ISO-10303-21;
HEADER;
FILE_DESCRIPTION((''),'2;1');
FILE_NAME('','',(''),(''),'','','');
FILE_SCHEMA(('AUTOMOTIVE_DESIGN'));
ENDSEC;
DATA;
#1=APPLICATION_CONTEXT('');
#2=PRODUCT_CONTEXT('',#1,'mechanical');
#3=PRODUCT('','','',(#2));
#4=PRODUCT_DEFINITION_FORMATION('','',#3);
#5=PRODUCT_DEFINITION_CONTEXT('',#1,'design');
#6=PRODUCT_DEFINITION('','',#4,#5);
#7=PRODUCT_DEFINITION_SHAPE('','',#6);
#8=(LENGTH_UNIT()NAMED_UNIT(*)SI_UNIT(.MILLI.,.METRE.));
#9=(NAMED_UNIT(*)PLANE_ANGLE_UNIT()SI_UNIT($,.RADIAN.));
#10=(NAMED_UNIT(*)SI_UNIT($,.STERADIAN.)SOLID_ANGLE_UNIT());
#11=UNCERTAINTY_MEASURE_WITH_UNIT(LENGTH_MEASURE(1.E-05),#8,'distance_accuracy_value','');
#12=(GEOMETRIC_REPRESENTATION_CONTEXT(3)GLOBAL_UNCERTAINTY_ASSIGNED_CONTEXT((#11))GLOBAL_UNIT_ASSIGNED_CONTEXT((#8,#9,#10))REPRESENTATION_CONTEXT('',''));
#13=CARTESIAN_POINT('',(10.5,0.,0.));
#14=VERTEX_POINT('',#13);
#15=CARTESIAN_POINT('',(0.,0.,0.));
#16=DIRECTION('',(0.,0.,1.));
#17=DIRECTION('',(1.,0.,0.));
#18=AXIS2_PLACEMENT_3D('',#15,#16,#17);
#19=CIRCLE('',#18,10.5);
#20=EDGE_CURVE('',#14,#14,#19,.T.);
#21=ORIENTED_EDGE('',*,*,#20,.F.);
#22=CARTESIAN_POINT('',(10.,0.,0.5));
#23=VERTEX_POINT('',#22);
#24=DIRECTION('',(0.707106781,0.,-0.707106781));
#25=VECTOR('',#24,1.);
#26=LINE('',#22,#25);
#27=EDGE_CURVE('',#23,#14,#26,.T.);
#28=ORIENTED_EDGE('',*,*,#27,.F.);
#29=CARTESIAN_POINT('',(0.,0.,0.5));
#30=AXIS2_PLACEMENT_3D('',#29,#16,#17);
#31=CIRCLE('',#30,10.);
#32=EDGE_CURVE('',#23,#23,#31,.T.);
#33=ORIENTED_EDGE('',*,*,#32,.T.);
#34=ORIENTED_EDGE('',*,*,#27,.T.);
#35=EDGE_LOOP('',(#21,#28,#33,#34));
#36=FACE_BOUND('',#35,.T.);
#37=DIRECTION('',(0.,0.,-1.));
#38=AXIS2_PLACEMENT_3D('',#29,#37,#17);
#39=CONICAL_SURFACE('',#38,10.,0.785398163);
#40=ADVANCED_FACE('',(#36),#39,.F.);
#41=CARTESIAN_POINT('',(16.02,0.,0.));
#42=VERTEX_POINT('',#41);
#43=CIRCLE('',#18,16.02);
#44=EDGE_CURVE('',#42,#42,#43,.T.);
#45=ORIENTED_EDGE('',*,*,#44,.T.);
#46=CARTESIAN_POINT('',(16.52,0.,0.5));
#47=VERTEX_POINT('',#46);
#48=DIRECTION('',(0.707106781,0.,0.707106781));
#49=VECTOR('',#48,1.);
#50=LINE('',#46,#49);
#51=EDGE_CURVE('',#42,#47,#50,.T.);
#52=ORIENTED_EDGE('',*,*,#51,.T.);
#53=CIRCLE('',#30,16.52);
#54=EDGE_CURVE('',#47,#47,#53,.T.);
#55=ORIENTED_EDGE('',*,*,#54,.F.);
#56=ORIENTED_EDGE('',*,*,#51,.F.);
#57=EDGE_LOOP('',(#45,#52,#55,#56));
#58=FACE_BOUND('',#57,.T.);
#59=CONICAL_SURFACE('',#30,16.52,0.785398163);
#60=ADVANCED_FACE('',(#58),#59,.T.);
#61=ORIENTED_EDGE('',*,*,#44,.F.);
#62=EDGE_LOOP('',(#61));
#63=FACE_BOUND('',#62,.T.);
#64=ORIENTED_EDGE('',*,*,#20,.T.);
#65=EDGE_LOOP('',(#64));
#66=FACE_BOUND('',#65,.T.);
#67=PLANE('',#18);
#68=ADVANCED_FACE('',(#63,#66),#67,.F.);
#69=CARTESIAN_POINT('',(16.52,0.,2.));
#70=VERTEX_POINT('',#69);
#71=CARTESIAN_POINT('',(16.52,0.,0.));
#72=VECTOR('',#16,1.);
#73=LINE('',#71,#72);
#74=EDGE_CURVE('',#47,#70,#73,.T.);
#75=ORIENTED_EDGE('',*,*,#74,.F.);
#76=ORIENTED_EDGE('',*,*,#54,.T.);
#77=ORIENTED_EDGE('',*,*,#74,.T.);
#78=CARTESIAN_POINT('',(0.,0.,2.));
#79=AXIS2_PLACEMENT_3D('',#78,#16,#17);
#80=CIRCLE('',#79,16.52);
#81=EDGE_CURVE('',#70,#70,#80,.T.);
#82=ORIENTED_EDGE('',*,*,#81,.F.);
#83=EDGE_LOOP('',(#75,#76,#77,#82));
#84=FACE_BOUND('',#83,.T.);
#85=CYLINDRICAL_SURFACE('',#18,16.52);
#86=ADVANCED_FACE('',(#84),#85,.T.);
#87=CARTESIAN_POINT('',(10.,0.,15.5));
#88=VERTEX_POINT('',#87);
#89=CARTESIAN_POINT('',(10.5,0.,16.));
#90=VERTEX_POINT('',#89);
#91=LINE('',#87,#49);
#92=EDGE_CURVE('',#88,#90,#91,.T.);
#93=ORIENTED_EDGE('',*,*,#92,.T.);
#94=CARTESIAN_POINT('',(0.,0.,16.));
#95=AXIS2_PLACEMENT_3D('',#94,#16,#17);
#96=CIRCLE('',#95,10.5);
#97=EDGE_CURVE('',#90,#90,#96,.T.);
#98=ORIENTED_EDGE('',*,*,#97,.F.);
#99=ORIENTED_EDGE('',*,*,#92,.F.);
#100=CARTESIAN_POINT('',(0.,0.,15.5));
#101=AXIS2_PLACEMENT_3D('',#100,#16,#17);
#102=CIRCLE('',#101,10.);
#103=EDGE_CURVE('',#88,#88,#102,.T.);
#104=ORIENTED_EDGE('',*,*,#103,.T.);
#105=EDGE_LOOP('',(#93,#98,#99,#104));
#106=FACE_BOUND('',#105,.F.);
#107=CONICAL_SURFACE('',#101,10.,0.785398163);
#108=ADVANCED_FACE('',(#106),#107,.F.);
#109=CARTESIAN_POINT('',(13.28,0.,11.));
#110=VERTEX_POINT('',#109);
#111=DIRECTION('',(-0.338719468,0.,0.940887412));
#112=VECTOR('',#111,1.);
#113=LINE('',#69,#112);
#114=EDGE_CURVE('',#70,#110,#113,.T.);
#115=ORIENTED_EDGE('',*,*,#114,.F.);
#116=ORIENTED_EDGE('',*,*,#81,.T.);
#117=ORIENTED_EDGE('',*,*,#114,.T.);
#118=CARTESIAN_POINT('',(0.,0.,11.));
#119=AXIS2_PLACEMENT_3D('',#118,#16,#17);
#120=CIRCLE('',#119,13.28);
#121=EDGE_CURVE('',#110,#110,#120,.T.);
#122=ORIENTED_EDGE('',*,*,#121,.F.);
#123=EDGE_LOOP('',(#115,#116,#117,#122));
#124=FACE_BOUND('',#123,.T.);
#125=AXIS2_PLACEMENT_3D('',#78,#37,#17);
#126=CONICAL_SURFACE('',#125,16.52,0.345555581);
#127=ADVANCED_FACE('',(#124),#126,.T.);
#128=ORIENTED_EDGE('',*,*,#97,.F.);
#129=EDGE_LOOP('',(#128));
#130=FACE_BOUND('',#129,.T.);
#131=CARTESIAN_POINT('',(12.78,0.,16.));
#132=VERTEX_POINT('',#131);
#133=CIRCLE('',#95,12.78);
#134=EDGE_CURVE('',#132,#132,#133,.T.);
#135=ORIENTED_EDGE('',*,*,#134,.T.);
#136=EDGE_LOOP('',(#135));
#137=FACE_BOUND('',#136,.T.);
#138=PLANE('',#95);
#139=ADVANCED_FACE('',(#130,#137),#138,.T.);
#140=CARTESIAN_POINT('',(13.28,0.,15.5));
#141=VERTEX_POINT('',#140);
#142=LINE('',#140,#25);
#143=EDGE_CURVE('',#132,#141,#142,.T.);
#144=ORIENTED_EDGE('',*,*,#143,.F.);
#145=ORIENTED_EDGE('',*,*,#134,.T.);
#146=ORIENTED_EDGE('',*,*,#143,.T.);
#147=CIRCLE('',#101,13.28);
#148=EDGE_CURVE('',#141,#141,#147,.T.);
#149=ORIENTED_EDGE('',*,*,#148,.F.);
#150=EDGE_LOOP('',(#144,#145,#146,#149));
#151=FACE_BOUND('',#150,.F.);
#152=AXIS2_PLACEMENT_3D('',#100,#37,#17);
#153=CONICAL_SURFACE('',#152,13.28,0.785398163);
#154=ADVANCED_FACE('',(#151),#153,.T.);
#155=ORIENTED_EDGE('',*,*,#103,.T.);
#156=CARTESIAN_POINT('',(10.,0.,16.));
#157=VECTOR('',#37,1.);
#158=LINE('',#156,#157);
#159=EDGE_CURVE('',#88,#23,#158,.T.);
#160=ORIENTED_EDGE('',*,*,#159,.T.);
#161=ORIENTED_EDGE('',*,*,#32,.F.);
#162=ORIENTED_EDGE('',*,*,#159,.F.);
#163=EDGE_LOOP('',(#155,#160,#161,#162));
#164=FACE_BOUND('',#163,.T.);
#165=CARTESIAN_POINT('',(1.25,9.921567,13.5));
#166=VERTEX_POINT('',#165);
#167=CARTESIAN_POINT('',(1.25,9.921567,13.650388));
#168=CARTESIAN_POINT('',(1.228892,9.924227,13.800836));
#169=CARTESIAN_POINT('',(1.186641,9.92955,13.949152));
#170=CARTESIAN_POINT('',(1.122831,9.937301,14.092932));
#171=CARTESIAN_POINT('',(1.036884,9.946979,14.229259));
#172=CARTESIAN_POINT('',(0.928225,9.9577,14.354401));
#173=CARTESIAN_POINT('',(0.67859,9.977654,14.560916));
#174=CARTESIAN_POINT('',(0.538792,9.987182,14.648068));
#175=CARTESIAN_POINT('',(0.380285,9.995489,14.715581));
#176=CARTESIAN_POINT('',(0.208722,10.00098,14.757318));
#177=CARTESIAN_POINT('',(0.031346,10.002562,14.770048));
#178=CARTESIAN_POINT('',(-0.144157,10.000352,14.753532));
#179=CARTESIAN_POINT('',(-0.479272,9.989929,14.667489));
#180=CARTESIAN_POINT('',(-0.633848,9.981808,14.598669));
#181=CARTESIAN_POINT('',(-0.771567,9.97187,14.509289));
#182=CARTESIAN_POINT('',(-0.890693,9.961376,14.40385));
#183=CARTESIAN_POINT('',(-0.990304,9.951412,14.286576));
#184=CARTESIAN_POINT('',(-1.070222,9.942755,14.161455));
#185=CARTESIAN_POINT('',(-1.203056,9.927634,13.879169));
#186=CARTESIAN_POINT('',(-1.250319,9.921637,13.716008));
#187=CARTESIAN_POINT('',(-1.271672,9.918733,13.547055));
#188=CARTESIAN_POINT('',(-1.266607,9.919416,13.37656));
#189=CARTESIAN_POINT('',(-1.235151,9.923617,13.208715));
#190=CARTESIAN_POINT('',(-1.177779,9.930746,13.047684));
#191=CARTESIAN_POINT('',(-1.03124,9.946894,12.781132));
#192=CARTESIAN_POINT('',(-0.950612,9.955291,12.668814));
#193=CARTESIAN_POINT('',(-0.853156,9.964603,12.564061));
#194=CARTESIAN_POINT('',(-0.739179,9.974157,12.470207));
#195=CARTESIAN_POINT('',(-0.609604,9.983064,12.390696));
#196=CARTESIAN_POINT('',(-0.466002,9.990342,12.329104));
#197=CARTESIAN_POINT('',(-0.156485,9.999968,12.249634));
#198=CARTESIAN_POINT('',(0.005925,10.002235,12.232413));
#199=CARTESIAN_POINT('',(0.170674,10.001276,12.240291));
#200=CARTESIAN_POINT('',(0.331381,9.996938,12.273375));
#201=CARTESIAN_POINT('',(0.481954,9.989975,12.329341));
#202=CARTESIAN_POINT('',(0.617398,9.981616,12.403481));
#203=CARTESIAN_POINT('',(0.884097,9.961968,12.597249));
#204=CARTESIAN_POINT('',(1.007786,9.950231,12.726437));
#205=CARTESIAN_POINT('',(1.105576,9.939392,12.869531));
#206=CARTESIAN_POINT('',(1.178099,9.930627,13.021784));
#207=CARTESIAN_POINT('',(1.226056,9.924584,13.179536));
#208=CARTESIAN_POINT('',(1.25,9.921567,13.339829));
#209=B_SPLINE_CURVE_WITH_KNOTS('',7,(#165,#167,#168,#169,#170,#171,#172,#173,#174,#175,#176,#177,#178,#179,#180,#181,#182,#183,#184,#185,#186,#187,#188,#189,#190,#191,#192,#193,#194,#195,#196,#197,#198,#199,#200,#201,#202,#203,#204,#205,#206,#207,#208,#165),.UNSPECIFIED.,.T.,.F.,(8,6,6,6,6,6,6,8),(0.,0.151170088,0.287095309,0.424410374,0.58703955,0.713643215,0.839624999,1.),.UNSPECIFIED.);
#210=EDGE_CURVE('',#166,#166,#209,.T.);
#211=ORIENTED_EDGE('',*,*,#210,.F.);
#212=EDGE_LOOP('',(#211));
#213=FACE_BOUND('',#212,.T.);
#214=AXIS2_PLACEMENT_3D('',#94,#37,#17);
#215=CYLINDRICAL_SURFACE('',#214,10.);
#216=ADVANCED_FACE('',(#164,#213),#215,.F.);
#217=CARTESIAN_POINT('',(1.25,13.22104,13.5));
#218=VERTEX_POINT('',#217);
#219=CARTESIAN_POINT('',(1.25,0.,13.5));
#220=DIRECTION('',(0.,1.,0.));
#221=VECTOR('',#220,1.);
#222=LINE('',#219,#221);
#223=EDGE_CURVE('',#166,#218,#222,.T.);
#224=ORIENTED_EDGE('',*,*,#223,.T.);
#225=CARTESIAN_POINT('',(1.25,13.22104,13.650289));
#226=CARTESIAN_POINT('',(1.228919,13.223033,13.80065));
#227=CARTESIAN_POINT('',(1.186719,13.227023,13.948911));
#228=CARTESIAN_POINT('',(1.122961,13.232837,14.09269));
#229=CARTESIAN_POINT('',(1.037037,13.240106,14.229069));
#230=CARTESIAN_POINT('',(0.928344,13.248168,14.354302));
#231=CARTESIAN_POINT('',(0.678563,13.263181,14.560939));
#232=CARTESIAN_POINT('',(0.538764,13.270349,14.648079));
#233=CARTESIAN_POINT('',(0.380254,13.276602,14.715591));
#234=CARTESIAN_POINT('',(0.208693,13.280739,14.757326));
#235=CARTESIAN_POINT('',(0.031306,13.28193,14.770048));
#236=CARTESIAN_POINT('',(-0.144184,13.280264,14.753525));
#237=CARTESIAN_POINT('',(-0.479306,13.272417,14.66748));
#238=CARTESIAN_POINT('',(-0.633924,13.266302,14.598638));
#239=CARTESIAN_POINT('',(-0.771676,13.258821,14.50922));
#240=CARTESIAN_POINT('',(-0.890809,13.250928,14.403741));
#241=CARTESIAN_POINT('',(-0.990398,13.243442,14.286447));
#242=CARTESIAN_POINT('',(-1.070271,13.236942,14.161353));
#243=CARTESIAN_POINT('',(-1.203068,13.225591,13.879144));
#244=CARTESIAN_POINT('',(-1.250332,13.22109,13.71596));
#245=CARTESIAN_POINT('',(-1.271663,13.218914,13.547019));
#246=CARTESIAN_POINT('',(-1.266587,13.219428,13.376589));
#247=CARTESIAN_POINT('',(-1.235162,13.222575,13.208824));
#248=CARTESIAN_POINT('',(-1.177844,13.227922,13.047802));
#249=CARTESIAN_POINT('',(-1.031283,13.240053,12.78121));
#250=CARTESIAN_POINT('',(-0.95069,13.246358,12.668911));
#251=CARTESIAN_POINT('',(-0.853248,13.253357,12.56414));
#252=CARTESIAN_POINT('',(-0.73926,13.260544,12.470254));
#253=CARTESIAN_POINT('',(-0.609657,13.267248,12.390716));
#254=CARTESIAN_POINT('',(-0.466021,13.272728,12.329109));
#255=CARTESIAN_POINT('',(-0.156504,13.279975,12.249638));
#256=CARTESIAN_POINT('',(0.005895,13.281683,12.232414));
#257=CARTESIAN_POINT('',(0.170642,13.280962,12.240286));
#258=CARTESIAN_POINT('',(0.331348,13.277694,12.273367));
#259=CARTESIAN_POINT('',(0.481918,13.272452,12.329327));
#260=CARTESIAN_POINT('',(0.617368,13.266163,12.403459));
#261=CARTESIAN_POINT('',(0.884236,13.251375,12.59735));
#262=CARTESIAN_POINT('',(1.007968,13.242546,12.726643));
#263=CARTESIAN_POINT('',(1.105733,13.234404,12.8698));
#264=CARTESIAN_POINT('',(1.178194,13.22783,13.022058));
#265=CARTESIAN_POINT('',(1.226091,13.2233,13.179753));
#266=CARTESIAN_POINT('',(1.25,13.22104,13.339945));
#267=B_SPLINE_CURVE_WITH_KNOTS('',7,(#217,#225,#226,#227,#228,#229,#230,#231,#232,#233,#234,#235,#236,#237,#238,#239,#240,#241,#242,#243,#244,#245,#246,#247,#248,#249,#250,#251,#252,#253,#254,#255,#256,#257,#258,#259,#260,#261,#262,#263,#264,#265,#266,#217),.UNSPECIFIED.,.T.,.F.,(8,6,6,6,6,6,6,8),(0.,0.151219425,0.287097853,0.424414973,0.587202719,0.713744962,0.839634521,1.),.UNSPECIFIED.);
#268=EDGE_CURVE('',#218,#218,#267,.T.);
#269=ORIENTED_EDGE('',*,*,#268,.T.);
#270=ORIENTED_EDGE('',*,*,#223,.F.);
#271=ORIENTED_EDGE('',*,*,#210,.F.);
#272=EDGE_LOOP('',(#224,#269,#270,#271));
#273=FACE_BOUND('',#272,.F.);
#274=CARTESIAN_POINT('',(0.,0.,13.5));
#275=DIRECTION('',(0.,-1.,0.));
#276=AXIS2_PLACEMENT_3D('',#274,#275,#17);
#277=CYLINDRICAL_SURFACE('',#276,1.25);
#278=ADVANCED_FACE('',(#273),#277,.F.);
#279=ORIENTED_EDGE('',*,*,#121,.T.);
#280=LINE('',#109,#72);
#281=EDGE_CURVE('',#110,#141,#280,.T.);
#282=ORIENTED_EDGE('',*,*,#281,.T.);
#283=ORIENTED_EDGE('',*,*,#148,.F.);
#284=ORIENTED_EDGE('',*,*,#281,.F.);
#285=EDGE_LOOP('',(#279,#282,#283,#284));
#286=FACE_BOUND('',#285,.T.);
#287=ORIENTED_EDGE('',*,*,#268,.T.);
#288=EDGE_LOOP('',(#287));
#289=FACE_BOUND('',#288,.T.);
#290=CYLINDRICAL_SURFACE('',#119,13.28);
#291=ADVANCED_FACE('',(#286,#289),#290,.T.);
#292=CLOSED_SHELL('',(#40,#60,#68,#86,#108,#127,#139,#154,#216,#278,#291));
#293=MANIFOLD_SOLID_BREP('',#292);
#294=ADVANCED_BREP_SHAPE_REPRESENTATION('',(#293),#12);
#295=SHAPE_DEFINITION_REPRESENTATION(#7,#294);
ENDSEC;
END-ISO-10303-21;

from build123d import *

# Parameters (mm, degrees)
F3_D     = 2.5
F3_DEPTH = 16.521
F4_SIZE  = 0.5


with BuildPart() as f1:
    # F0 (on Front) → F1 (revolve)
    with BuildSketch(Plane.XZ):
        Polygon((10, 16), (10, 0), (16.52, 0), (16.52, 2), (13.28, 11), (13.28, 15.774938604), (13.28, 16), align=None)
    revolve(axis=Axis((0, 0, 22.1384353936), (0, 0, 1)))

    # F3 (through all, one way)
    with BuildSketch(Plane.XZ):
        with Locations((0, 13.5)):
            Circle(F3_D / 2)
    extrude(amount=-F3_DEPTH, mode=Mode.SUBTRACT)

    # F4
    f4_edges = [f1.edges().sort_by_distance(p)[0] for p in [
        (-13.28, 0, 16),
        (-10, 0, 16),
        (-10, 0, 0),
        (-16.52, 0, 0),
    ]]
    chamfer(f4_edges, length=F4_SIZE)


solid = f1.part
